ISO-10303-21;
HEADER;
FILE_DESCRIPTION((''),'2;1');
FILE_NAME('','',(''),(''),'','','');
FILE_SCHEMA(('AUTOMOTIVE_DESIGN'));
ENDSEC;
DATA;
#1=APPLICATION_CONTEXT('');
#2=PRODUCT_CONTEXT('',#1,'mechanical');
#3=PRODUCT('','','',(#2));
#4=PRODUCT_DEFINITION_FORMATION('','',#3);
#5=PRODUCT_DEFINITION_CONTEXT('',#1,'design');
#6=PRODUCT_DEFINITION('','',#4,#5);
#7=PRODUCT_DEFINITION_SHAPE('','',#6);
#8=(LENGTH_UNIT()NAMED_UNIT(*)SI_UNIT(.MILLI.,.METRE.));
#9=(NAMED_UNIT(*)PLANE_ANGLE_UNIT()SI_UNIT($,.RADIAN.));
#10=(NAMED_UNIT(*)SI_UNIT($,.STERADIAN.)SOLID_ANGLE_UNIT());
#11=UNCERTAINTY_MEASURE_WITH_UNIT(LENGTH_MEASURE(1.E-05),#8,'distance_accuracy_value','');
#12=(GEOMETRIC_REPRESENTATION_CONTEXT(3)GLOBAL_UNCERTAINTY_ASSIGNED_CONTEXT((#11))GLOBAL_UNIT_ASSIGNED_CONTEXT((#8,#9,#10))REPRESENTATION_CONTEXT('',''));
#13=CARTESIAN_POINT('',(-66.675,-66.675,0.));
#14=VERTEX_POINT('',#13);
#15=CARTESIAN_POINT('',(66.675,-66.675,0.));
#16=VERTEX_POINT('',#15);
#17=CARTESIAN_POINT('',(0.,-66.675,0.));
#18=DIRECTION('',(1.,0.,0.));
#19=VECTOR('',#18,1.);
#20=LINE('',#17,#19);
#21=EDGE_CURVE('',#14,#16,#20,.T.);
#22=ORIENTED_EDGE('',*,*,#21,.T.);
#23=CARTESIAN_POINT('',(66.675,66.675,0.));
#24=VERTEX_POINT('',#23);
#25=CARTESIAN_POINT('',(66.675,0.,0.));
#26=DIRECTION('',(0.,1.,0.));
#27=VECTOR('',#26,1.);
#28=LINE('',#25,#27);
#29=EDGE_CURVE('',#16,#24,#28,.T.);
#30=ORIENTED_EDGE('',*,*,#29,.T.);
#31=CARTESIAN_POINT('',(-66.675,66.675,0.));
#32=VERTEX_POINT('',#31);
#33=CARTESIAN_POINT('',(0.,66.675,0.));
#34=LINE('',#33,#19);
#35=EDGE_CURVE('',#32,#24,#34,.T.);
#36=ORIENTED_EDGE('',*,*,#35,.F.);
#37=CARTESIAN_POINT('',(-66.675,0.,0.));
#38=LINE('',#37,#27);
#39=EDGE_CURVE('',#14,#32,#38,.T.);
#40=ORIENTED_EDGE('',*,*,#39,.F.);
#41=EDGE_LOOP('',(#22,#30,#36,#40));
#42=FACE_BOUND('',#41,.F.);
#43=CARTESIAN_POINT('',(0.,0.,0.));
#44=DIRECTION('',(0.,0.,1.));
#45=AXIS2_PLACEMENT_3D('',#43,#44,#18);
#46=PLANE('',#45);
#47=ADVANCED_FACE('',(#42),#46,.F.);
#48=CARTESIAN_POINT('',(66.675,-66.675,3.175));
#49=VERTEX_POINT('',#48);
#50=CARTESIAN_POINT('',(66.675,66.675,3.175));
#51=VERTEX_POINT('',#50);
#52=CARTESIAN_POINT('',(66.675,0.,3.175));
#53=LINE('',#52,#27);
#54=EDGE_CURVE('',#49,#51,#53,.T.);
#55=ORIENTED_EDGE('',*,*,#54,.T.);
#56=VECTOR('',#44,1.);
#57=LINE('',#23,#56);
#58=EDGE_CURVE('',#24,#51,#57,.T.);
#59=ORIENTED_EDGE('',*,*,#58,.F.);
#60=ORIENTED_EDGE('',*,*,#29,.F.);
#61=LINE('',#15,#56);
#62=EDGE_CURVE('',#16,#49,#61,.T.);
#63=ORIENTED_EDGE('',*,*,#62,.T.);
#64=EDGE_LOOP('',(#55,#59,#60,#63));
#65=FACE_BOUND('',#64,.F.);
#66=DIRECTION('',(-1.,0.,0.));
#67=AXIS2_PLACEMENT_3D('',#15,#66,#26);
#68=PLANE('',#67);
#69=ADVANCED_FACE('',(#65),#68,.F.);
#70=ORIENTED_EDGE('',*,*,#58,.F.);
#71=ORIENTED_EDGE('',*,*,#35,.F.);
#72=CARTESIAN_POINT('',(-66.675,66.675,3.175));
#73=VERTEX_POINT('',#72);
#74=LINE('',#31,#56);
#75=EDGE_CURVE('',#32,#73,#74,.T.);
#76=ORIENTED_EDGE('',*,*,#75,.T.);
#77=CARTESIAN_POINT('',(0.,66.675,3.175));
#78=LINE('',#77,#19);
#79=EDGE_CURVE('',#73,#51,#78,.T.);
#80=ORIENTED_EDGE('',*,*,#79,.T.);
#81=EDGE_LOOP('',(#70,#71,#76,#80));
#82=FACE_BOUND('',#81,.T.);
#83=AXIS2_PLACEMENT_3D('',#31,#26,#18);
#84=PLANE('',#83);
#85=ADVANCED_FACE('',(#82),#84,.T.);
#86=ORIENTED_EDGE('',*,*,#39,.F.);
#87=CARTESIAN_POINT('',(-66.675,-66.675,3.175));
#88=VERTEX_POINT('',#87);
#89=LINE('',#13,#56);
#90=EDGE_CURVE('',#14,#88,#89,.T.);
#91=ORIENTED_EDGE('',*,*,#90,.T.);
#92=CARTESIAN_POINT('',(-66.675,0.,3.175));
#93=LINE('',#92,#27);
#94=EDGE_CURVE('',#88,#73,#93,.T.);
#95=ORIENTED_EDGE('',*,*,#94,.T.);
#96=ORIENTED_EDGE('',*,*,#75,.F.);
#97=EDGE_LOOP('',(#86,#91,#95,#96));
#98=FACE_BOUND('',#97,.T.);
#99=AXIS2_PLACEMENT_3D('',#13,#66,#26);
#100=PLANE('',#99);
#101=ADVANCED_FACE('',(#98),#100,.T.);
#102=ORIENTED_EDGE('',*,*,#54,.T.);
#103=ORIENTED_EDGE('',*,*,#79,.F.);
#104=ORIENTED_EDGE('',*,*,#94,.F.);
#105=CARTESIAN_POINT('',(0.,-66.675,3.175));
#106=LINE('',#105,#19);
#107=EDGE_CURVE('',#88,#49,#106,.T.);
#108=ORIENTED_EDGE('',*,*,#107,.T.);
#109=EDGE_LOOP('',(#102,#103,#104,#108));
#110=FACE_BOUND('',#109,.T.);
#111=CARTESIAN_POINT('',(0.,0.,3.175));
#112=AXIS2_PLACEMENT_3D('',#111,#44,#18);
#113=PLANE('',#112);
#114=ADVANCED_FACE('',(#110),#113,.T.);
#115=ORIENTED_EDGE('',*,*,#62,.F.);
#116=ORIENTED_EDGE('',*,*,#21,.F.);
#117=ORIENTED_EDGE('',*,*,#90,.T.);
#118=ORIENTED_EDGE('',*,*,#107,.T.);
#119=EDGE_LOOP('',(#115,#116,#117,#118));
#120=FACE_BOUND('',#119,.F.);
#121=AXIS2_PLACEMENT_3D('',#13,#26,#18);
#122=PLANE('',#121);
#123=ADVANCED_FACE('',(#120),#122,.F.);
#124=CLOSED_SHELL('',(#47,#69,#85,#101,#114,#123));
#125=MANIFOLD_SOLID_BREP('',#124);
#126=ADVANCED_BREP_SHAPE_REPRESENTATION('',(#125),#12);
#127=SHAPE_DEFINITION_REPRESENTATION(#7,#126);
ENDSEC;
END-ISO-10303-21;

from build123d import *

# Parameters (mm, degrees)
F0_W     = 133.35
F0_H     = 133.35
F1_DEPTH = 3.175


# Not quite as in the source:
# - a feature of the source that left no trace in its solid (it failed there, or was rolled back) is left out


with BuildPart() as f1:
    # F0 (on Top) → F1 (new body)
    with BuildSketch(Plane.XY):
        Rectangle(F0_W, F0_H)
    extrude(amount=F1_DEPTH)


solid = f1.part
